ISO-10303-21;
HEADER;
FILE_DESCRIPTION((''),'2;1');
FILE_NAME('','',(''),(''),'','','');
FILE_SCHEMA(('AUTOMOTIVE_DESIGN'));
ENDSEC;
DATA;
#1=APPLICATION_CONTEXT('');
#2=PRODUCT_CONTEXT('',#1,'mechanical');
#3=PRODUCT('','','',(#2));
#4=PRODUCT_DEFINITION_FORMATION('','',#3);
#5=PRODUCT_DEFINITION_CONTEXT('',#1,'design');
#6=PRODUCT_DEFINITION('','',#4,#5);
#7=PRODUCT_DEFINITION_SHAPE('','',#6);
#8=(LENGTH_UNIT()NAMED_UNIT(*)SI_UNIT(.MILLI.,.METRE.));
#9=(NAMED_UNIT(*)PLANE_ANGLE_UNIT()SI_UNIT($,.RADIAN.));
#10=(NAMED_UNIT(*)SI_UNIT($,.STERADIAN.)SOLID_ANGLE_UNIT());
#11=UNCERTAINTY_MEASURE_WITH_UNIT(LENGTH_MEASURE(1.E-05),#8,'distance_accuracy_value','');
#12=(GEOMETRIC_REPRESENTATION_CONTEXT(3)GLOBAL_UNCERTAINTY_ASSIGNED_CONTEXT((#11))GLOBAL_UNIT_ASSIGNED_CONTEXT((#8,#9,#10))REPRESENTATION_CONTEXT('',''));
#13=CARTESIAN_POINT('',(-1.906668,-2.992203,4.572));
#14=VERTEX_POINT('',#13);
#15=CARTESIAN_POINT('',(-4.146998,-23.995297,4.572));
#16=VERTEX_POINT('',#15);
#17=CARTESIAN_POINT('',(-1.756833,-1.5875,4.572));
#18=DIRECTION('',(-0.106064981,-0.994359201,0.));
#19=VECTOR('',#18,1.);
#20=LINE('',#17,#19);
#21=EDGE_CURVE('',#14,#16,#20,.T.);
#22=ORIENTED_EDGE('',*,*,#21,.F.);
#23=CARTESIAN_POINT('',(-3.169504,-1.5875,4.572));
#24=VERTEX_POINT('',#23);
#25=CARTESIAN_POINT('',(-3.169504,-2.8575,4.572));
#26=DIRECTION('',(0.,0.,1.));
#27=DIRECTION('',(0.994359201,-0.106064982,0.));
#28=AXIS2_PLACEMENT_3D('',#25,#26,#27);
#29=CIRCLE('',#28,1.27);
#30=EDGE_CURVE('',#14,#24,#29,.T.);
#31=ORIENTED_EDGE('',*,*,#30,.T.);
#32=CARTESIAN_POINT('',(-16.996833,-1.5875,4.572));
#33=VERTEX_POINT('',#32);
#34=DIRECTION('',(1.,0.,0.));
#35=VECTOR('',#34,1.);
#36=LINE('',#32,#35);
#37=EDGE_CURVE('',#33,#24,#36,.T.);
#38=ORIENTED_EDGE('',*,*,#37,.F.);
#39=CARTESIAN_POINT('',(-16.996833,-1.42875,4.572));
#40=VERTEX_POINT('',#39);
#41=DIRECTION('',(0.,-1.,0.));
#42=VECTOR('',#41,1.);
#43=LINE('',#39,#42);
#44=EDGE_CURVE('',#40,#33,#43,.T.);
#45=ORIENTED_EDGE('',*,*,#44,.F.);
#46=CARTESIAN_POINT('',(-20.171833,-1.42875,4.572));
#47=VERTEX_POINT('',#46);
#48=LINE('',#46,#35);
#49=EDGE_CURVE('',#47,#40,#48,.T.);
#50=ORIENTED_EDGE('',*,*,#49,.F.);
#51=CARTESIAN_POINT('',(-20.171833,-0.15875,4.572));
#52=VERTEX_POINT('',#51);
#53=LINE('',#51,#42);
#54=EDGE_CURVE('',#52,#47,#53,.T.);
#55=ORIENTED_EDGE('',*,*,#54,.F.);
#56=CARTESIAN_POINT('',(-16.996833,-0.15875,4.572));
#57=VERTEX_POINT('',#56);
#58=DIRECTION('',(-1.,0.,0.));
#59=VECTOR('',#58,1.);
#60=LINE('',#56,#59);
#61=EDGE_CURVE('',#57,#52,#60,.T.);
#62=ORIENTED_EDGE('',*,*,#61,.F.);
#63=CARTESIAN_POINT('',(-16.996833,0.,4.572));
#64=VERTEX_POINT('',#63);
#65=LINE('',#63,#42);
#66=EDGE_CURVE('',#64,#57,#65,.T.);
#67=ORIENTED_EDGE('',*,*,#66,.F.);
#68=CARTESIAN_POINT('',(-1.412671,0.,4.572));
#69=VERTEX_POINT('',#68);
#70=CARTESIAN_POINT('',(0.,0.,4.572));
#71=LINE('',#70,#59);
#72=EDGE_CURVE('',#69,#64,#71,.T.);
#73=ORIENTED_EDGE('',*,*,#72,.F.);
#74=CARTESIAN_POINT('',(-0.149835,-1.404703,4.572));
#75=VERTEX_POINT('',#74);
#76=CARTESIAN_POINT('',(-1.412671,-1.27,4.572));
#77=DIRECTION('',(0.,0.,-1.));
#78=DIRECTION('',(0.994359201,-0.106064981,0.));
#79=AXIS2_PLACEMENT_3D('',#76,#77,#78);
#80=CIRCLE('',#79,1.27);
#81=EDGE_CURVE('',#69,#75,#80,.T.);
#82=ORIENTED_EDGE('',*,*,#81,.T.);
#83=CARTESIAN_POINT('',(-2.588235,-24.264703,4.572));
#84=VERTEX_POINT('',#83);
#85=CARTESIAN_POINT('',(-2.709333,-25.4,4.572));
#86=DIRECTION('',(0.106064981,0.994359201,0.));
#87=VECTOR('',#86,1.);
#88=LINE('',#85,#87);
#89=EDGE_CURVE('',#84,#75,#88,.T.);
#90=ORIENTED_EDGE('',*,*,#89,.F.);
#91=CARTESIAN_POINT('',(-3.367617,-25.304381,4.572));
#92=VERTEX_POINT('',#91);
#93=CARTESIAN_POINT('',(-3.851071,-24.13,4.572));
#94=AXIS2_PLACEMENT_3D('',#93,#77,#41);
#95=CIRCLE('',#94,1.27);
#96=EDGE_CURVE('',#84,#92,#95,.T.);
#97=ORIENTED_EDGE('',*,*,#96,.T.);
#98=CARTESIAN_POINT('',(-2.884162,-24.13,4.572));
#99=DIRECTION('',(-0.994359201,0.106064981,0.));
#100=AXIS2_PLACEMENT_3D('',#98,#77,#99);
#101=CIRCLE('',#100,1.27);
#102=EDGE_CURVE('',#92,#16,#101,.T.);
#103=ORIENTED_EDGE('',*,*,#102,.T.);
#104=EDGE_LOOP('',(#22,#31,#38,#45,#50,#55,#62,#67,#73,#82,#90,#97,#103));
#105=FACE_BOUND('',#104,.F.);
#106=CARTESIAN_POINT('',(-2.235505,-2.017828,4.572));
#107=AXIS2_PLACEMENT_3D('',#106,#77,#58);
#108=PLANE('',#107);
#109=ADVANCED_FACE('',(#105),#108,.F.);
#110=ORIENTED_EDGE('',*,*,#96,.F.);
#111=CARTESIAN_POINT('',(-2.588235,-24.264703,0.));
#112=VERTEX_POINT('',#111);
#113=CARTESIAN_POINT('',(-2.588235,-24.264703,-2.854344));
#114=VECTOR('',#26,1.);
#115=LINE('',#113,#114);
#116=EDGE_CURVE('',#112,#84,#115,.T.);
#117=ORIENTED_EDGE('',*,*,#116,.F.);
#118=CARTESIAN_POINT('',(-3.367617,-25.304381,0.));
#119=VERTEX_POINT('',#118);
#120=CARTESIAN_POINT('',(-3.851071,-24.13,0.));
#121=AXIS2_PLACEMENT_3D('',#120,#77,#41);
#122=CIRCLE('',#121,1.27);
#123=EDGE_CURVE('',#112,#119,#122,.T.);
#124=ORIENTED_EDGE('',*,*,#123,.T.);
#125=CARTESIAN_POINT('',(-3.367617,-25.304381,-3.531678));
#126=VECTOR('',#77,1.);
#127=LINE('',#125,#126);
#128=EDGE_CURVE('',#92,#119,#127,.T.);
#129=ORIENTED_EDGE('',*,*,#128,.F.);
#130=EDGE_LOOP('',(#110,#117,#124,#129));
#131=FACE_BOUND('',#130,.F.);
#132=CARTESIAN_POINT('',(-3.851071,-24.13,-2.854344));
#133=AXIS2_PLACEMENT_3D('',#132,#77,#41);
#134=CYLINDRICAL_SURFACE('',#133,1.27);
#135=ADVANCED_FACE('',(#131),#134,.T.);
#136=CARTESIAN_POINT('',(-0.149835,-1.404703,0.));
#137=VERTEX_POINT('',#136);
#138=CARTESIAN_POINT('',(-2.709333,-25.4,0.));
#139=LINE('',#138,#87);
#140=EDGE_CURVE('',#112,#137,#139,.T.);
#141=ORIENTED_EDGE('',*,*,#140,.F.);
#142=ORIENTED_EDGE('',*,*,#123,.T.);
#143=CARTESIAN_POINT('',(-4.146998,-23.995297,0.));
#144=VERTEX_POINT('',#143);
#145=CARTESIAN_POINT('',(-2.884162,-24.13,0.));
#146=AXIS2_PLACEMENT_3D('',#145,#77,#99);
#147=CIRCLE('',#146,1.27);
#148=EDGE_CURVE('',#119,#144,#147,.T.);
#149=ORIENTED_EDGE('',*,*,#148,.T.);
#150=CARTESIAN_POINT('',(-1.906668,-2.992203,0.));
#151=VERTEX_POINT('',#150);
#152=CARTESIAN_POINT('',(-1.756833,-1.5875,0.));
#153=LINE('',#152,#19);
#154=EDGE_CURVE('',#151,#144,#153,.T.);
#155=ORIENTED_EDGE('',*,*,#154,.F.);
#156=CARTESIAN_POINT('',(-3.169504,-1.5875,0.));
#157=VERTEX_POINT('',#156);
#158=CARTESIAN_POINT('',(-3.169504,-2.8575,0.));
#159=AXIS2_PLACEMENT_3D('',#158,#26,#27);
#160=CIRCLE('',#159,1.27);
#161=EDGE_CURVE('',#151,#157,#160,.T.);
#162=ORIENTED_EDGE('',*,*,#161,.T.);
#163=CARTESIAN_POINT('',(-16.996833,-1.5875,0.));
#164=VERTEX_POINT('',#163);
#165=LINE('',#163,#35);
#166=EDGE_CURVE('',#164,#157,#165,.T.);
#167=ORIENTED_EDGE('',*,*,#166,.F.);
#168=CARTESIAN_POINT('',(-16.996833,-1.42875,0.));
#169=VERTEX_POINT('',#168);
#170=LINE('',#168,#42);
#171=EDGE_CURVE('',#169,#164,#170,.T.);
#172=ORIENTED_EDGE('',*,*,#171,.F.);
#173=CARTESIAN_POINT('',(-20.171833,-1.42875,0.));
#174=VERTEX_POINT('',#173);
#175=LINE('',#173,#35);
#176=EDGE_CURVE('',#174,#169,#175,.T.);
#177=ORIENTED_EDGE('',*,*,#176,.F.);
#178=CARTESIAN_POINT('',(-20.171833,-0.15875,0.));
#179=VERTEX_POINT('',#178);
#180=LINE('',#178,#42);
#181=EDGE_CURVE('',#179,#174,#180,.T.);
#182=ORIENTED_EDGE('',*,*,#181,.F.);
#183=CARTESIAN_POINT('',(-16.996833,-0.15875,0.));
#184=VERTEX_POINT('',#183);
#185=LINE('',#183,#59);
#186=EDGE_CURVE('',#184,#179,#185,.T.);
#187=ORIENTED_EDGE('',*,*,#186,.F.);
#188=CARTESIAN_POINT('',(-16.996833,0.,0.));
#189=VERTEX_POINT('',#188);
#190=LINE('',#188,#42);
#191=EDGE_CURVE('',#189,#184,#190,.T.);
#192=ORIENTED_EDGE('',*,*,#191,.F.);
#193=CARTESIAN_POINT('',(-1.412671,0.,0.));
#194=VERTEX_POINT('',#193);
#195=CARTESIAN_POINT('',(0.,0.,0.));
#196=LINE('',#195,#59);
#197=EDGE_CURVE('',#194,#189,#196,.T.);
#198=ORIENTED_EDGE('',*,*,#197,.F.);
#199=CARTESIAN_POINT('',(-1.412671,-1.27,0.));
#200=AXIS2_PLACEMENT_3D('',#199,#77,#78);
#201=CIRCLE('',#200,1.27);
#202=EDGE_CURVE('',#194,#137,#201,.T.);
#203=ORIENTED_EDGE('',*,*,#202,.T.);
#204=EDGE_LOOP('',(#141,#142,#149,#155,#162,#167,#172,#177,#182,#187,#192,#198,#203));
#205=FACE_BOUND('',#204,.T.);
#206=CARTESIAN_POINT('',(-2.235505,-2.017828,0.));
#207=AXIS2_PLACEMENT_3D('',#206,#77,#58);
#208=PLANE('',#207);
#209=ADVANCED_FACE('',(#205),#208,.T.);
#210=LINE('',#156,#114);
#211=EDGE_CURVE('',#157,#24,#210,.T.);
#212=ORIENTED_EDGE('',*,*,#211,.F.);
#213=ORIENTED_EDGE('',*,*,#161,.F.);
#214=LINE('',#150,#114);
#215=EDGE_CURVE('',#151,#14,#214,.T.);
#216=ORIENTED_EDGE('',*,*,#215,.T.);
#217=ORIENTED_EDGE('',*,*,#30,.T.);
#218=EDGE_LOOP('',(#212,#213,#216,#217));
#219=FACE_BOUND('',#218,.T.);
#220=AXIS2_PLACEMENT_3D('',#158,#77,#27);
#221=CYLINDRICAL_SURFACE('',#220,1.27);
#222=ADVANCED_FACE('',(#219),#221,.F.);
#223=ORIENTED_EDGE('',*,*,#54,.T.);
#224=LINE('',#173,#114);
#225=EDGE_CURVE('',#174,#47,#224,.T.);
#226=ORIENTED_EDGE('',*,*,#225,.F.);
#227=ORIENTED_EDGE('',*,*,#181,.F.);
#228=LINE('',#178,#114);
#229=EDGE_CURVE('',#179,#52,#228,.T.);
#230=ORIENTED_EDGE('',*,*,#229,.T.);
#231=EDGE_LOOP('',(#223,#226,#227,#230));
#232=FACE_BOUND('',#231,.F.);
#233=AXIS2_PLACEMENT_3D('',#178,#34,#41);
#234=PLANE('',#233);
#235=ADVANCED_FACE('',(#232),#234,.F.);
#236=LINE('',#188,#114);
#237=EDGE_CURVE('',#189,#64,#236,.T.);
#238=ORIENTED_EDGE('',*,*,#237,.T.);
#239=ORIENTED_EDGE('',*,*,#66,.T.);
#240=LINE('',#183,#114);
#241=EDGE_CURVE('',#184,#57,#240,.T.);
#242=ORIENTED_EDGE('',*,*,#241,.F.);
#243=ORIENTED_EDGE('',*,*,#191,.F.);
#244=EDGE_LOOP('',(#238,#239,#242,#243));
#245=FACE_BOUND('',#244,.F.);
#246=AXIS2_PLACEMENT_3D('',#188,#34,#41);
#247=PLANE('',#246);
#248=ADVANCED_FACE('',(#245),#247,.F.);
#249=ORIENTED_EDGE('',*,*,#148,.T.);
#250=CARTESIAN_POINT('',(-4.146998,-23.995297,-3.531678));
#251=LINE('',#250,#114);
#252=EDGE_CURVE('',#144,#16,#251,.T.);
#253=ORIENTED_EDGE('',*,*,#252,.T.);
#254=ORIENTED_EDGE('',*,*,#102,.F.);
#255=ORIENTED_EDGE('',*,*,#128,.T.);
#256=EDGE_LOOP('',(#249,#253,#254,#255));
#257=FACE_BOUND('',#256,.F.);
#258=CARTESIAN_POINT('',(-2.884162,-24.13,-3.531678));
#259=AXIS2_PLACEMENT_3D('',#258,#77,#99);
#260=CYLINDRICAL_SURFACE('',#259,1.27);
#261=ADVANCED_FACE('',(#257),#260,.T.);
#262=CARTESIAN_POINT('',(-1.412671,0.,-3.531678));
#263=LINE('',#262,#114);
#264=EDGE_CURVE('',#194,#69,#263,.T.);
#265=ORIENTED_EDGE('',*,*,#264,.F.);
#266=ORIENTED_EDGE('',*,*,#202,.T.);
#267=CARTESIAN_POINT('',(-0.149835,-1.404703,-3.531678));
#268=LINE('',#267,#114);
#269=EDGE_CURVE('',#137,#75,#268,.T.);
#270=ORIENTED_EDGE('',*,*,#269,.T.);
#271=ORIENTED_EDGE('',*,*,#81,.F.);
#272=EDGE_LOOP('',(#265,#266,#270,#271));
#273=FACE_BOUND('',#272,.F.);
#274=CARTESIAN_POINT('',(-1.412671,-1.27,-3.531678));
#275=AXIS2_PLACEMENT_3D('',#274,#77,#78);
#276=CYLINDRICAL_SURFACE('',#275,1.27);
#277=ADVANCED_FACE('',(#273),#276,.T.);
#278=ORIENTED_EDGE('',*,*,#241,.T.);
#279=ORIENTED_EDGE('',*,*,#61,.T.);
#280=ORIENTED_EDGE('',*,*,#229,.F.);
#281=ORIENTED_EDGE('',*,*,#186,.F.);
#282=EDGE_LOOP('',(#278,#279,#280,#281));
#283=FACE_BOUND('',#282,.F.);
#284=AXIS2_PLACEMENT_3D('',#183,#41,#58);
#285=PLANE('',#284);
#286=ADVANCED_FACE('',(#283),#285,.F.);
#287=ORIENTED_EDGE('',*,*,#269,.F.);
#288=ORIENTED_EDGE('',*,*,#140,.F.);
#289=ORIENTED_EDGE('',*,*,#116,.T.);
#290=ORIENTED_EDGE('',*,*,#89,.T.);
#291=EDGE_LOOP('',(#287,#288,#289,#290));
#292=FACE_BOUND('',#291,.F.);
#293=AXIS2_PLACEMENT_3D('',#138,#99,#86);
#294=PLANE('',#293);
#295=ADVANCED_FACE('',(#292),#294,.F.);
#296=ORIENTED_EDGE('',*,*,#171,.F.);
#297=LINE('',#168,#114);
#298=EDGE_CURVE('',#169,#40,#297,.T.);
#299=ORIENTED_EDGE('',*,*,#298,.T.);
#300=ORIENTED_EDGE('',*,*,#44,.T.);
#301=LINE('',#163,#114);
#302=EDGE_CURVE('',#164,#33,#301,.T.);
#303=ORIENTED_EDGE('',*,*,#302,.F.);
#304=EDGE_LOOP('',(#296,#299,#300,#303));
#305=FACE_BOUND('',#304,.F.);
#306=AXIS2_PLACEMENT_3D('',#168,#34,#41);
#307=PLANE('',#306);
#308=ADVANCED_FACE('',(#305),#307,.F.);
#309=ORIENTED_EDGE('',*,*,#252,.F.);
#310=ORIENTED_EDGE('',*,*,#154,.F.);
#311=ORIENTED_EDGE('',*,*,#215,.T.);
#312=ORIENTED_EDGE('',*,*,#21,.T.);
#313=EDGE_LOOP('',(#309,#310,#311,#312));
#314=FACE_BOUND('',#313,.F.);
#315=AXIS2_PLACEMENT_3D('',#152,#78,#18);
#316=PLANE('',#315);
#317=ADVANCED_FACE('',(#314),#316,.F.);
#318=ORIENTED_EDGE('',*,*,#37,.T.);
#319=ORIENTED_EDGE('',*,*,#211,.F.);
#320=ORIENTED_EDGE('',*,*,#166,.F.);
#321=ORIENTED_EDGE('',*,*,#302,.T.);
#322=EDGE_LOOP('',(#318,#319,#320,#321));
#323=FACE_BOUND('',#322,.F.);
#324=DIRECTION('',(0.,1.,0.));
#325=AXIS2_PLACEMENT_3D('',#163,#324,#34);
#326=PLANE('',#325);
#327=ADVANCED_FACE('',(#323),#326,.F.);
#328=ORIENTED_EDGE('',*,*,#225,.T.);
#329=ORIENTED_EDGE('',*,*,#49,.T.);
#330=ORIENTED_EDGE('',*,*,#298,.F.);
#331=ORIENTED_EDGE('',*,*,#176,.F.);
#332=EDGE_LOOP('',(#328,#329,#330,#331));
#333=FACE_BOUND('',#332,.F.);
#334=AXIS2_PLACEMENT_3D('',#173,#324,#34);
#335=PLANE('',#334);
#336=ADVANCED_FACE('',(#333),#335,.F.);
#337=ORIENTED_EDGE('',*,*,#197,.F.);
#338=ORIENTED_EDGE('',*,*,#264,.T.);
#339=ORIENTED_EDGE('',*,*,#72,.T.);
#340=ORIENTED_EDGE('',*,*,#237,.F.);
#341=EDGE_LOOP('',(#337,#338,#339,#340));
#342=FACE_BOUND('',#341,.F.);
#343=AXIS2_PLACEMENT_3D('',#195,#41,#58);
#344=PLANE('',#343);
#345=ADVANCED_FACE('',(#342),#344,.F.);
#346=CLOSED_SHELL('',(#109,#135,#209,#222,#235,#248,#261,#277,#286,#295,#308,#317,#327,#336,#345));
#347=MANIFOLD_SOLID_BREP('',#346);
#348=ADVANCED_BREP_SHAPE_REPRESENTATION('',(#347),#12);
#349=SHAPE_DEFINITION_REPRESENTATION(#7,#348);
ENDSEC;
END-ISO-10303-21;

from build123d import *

# Parameters (mm, degrees)
F1_DEPTH    = 4.572
F2_T1_DEPTH = 4.572
F2_T3_DEPTH = 11.6353556042
F2_T5_DEPTH = 10.2806889376


# Not quite as in the source:
# - a fillet or chamfer that OpenCascade refuses, or shapes differently, is made with other operations: its cross-section is extruded or revolved along the edge and cut away or added


with BuildPart() as f1:
    # F0 (on Top) → F1 (new body)
    with BuildSketch(Plane.XY):
        Polygon((-16.9968333333, -0.15875), (-20.1718333333, -0.15875), (-20.1718333333, -1.42875), (-16.9968333333, -1.42875), (-16.9968333333, -1.5875), (-1.7568333333, -1.5875), (-4.2968333333, -25.4), (-2.7093333333, -25.4), (0, 0), (-16.9968333333, 0), align=None)
    extrude(amount=F1_DEPTH)

    # F2: fillet of radius 1.27 on 4 edges, made by hand

    # F2_s2 → F2_t1 (join)
    with BuildSketch(Plane.XY):
        with BuildLine():
            ThreePointArc((-1.9066682695, -2.9922025264), (-2.2250542944, -2.0084335151), (-3.1695044542, -1.5875))
            Line((-3.1695044542, -1.5875), (-1.7568333333, -1.5875))
            Line((-1.7568333333, -1.5875), (-1.9066682695, -2.9922025264))
        make_face()
    extrude(amount=F2_T1_DEPTH)

    # F2_s4 → F2_t3 (cut)
    with BuildSketch(Plane.XY.offset(-3.5316778021)):
        with BuildLine():
            ThreePointArc((-4.1469983972, -23.9952974736), (-3.8286123722, -24.9790664849), (-2.8841622125, -25.4))
            Line((-2.8841622125, -25.4), (-4.2968333333, -25.4))
            Line((-4.2968333333, -25.4), (-4.1469983972, -23.9952974736))
        make_face()
        with BuildLine():
            ThreePointArc((-0.1498349361, -1.4047025264), (-0.4682209611, -0.4209335151), (-1.4126711208, 0))
            Line((-1.4126711208, 0), (0, 0))
            Line((0, 0), (-0.1498349361, -1.4047025264))
        make_face()
    extrude(amount=F2_T3_DEPTH, mode=Mode.SUBTRACT)

    # F2_s6 → F2_t5 (cut)
    with BuildSketch(Plane.XY.offset(-2.8543444688)):
        with BuildLine():
            ThreePointArc((-3.8510711208, -25.4), (-3.002004636, -25.0744501597), (-2.5882349361, -24.2647025264))
            Line((-2.5882349361, -24.2647025264), (-2.7093333333, -25.4))
            Line((-2.7093333333, -25.4), (-3.8510711208, -25.4))
        make_face()
    extrude(amount=F2_T5_DEPTH, mode=Mode.SUBTRACT)


solid = f1.part
